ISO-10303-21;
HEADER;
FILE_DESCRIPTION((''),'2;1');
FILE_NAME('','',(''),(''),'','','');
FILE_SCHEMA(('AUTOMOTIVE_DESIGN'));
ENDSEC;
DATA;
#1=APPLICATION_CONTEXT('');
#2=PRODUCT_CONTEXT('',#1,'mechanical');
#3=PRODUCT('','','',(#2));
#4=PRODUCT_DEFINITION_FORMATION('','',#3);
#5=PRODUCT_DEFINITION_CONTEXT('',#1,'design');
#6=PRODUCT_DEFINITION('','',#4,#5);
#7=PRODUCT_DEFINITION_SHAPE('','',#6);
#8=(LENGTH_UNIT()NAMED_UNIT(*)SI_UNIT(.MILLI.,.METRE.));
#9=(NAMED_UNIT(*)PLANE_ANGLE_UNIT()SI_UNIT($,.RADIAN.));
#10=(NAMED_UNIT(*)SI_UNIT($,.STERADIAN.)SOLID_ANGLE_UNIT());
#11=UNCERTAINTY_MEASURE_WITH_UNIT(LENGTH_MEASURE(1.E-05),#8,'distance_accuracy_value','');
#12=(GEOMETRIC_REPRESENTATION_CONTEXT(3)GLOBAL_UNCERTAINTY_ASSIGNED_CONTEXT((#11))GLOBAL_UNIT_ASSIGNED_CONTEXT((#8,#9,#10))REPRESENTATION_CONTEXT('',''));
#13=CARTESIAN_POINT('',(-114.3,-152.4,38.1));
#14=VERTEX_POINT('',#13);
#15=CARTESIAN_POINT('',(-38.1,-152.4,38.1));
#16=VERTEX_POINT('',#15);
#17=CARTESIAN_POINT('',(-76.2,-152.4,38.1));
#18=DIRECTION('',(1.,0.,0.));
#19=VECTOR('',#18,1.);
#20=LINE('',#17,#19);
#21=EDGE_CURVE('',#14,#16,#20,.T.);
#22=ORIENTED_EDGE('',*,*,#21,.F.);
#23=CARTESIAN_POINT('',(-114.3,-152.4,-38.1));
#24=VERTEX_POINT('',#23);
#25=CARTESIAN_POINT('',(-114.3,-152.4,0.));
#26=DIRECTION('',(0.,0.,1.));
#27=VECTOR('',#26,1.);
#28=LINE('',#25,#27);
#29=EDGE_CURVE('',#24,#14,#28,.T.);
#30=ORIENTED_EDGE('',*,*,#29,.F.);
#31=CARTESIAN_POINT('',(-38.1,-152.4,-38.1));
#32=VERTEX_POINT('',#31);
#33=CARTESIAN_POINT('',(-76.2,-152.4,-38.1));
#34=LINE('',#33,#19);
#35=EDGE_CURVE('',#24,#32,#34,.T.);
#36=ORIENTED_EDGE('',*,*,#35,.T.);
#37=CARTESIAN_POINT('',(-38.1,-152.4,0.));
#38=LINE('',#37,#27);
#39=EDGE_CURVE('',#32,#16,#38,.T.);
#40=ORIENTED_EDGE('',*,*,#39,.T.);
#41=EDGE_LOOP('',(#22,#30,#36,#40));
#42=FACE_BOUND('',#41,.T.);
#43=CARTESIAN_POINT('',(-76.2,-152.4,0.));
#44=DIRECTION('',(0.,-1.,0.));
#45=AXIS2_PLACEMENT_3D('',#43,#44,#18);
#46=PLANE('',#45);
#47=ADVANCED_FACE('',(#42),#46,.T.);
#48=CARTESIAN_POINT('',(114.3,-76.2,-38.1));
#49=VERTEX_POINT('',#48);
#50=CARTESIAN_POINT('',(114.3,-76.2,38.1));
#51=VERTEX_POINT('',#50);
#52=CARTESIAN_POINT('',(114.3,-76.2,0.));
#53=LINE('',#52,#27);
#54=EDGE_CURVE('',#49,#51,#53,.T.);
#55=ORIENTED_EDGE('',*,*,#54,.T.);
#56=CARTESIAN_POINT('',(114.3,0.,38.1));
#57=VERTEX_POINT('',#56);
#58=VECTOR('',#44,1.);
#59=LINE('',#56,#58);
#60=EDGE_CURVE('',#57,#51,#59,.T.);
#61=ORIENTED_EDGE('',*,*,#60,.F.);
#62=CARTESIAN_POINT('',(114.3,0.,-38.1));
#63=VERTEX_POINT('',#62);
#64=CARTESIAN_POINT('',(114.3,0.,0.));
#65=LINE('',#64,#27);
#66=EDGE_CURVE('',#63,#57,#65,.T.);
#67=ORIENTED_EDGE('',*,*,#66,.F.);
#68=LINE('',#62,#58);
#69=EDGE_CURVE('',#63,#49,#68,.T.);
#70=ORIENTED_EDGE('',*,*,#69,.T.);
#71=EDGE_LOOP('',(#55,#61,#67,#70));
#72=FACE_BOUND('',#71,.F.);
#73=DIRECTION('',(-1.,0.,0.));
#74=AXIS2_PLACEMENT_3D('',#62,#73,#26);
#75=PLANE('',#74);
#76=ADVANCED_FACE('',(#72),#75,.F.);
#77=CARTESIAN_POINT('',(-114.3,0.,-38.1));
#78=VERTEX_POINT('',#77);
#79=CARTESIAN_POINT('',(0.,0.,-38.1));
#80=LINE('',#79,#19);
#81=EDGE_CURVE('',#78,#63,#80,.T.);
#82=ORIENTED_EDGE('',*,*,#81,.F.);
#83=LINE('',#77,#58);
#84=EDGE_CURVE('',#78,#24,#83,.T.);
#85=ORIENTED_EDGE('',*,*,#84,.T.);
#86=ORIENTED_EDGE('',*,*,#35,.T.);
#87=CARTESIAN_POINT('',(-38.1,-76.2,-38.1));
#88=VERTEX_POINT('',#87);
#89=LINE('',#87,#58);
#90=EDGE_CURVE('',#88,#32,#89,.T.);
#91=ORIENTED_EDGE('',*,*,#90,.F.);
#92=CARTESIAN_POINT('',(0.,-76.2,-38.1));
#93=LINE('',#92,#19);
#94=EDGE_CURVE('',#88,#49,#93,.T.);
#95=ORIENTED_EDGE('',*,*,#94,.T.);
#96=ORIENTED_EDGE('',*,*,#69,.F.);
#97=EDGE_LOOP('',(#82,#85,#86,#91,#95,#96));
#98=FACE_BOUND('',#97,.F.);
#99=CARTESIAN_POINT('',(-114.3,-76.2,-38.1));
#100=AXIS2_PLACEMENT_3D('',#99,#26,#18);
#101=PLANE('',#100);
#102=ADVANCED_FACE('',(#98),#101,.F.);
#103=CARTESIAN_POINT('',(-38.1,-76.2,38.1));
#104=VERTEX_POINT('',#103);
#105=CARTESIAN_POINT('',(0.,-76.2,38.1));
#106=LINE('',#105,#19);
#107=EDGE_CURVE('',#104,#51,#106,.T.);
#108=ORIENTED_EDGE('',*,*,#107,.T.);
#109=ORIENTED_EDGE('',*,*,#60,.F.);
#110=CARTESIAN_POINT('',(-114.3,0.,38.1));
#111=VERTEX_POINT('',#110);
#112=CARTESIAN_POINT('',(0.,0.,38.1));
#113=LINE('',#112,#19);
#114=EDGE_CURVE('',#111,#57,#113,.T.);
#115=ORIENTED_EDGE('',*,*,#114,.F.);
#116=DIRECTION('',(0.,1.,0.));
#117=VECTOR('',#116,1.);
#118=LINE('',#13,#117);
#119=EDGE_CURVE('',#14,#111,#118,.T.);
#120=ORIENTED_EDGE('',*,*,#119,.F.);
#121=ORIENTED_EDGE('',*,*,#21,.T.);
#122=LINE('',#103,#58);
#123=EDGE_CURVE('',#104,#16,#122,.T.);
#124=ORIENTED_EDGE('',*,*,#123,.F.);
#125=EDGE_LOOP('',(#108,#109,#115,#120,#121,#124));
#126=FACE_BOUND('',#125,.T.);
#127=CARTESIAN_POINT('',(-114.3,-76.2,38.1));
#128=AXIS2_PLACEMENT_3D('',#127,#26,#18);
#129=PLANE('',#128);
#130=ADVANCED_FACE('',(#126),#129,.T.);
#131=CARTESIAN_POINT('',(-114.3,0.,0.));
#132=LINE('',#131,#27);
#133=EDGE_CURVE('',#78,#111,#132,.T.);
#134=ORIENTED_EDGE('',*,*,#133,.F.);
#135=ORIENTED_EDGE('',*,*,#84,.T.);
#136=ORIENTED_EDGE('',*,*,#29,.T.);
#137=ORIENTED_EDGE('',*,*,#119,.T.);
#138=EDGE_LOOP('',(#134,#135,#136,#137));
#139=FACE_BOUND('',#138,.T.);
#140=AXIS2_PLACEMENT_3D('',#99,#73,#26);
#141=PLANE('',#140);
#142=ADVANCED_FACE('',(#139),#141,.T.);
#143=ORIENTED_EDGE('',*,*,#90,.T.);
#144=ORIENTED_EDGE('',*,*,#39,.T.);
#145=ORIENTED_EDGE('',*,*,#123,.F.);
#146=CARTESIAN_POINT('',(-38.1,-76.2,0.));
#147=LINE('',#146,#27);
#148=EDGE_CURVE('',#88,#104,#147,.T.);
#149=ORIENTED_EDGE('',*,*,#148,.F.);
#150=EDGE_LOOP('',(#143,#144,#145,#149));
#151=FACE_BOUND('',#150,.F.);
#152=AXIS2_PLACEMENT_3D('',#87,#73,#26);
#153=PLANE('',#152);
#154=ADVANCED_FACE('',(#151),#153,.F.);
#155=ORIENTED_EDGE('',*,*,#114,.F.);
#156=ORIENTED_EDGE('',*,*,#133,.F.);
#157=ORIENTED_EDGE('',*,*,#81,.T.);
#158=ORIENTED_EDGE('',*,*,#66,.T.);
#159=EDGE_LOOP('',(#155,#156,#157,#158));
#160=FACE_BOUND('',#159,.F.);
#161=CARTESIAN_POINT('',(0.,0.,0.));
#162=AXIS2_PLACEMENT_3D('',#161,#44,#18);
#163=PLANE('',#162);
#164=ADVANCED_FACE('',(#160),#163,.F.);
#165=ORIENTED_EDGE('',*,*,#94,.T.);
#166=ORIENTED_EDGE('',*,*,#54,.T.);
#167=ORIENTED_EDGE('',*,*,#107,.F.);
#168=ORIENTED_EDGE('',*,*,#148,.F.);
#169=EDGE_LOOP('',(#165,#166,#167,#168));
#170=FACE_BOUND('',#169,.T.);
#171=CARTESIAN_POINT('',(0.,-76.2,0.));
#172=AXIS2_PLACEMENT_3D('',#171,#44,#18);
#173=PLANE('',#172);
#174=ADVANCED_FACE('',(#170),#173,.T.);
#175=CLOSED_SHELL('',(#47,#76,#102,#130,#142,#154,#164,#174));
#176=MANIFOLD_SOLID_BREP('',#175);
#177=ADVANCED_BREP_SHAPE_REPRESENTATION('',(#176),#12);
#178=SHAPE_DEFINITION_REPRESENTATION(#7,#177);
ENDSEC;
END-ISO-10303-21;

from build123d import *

# Parameters (mm, degrees)
F1_W     = 228.6
F1_H     = 76.2
F2_DEPTH = 76.2
F3_W     = 76.2
F3_H     = 76.2
F4_DEPTH = 76.2


# Not quite as in the source:
# - a variable given as a bare number and used for a length is read in inches; the dataset says mm whatever the document's units were


with BuildPart() as f2:
    # F1 (on Front) → F2 (new body)
    with BuildSketch(Plane.XZ):
        Rectangle(F1_W, F1_H)
    extrude(amount=F2_DEPTH)

    # F3 (on face) → F4 (join)
    with BuildSketch(Plane.XZ.offset(76.2)):
        with Locations((-76.2, 0)):
            Rectangle(F3_W, F3_H)
    extrude(amount=F4_DEPTH)


solid = f2.part
